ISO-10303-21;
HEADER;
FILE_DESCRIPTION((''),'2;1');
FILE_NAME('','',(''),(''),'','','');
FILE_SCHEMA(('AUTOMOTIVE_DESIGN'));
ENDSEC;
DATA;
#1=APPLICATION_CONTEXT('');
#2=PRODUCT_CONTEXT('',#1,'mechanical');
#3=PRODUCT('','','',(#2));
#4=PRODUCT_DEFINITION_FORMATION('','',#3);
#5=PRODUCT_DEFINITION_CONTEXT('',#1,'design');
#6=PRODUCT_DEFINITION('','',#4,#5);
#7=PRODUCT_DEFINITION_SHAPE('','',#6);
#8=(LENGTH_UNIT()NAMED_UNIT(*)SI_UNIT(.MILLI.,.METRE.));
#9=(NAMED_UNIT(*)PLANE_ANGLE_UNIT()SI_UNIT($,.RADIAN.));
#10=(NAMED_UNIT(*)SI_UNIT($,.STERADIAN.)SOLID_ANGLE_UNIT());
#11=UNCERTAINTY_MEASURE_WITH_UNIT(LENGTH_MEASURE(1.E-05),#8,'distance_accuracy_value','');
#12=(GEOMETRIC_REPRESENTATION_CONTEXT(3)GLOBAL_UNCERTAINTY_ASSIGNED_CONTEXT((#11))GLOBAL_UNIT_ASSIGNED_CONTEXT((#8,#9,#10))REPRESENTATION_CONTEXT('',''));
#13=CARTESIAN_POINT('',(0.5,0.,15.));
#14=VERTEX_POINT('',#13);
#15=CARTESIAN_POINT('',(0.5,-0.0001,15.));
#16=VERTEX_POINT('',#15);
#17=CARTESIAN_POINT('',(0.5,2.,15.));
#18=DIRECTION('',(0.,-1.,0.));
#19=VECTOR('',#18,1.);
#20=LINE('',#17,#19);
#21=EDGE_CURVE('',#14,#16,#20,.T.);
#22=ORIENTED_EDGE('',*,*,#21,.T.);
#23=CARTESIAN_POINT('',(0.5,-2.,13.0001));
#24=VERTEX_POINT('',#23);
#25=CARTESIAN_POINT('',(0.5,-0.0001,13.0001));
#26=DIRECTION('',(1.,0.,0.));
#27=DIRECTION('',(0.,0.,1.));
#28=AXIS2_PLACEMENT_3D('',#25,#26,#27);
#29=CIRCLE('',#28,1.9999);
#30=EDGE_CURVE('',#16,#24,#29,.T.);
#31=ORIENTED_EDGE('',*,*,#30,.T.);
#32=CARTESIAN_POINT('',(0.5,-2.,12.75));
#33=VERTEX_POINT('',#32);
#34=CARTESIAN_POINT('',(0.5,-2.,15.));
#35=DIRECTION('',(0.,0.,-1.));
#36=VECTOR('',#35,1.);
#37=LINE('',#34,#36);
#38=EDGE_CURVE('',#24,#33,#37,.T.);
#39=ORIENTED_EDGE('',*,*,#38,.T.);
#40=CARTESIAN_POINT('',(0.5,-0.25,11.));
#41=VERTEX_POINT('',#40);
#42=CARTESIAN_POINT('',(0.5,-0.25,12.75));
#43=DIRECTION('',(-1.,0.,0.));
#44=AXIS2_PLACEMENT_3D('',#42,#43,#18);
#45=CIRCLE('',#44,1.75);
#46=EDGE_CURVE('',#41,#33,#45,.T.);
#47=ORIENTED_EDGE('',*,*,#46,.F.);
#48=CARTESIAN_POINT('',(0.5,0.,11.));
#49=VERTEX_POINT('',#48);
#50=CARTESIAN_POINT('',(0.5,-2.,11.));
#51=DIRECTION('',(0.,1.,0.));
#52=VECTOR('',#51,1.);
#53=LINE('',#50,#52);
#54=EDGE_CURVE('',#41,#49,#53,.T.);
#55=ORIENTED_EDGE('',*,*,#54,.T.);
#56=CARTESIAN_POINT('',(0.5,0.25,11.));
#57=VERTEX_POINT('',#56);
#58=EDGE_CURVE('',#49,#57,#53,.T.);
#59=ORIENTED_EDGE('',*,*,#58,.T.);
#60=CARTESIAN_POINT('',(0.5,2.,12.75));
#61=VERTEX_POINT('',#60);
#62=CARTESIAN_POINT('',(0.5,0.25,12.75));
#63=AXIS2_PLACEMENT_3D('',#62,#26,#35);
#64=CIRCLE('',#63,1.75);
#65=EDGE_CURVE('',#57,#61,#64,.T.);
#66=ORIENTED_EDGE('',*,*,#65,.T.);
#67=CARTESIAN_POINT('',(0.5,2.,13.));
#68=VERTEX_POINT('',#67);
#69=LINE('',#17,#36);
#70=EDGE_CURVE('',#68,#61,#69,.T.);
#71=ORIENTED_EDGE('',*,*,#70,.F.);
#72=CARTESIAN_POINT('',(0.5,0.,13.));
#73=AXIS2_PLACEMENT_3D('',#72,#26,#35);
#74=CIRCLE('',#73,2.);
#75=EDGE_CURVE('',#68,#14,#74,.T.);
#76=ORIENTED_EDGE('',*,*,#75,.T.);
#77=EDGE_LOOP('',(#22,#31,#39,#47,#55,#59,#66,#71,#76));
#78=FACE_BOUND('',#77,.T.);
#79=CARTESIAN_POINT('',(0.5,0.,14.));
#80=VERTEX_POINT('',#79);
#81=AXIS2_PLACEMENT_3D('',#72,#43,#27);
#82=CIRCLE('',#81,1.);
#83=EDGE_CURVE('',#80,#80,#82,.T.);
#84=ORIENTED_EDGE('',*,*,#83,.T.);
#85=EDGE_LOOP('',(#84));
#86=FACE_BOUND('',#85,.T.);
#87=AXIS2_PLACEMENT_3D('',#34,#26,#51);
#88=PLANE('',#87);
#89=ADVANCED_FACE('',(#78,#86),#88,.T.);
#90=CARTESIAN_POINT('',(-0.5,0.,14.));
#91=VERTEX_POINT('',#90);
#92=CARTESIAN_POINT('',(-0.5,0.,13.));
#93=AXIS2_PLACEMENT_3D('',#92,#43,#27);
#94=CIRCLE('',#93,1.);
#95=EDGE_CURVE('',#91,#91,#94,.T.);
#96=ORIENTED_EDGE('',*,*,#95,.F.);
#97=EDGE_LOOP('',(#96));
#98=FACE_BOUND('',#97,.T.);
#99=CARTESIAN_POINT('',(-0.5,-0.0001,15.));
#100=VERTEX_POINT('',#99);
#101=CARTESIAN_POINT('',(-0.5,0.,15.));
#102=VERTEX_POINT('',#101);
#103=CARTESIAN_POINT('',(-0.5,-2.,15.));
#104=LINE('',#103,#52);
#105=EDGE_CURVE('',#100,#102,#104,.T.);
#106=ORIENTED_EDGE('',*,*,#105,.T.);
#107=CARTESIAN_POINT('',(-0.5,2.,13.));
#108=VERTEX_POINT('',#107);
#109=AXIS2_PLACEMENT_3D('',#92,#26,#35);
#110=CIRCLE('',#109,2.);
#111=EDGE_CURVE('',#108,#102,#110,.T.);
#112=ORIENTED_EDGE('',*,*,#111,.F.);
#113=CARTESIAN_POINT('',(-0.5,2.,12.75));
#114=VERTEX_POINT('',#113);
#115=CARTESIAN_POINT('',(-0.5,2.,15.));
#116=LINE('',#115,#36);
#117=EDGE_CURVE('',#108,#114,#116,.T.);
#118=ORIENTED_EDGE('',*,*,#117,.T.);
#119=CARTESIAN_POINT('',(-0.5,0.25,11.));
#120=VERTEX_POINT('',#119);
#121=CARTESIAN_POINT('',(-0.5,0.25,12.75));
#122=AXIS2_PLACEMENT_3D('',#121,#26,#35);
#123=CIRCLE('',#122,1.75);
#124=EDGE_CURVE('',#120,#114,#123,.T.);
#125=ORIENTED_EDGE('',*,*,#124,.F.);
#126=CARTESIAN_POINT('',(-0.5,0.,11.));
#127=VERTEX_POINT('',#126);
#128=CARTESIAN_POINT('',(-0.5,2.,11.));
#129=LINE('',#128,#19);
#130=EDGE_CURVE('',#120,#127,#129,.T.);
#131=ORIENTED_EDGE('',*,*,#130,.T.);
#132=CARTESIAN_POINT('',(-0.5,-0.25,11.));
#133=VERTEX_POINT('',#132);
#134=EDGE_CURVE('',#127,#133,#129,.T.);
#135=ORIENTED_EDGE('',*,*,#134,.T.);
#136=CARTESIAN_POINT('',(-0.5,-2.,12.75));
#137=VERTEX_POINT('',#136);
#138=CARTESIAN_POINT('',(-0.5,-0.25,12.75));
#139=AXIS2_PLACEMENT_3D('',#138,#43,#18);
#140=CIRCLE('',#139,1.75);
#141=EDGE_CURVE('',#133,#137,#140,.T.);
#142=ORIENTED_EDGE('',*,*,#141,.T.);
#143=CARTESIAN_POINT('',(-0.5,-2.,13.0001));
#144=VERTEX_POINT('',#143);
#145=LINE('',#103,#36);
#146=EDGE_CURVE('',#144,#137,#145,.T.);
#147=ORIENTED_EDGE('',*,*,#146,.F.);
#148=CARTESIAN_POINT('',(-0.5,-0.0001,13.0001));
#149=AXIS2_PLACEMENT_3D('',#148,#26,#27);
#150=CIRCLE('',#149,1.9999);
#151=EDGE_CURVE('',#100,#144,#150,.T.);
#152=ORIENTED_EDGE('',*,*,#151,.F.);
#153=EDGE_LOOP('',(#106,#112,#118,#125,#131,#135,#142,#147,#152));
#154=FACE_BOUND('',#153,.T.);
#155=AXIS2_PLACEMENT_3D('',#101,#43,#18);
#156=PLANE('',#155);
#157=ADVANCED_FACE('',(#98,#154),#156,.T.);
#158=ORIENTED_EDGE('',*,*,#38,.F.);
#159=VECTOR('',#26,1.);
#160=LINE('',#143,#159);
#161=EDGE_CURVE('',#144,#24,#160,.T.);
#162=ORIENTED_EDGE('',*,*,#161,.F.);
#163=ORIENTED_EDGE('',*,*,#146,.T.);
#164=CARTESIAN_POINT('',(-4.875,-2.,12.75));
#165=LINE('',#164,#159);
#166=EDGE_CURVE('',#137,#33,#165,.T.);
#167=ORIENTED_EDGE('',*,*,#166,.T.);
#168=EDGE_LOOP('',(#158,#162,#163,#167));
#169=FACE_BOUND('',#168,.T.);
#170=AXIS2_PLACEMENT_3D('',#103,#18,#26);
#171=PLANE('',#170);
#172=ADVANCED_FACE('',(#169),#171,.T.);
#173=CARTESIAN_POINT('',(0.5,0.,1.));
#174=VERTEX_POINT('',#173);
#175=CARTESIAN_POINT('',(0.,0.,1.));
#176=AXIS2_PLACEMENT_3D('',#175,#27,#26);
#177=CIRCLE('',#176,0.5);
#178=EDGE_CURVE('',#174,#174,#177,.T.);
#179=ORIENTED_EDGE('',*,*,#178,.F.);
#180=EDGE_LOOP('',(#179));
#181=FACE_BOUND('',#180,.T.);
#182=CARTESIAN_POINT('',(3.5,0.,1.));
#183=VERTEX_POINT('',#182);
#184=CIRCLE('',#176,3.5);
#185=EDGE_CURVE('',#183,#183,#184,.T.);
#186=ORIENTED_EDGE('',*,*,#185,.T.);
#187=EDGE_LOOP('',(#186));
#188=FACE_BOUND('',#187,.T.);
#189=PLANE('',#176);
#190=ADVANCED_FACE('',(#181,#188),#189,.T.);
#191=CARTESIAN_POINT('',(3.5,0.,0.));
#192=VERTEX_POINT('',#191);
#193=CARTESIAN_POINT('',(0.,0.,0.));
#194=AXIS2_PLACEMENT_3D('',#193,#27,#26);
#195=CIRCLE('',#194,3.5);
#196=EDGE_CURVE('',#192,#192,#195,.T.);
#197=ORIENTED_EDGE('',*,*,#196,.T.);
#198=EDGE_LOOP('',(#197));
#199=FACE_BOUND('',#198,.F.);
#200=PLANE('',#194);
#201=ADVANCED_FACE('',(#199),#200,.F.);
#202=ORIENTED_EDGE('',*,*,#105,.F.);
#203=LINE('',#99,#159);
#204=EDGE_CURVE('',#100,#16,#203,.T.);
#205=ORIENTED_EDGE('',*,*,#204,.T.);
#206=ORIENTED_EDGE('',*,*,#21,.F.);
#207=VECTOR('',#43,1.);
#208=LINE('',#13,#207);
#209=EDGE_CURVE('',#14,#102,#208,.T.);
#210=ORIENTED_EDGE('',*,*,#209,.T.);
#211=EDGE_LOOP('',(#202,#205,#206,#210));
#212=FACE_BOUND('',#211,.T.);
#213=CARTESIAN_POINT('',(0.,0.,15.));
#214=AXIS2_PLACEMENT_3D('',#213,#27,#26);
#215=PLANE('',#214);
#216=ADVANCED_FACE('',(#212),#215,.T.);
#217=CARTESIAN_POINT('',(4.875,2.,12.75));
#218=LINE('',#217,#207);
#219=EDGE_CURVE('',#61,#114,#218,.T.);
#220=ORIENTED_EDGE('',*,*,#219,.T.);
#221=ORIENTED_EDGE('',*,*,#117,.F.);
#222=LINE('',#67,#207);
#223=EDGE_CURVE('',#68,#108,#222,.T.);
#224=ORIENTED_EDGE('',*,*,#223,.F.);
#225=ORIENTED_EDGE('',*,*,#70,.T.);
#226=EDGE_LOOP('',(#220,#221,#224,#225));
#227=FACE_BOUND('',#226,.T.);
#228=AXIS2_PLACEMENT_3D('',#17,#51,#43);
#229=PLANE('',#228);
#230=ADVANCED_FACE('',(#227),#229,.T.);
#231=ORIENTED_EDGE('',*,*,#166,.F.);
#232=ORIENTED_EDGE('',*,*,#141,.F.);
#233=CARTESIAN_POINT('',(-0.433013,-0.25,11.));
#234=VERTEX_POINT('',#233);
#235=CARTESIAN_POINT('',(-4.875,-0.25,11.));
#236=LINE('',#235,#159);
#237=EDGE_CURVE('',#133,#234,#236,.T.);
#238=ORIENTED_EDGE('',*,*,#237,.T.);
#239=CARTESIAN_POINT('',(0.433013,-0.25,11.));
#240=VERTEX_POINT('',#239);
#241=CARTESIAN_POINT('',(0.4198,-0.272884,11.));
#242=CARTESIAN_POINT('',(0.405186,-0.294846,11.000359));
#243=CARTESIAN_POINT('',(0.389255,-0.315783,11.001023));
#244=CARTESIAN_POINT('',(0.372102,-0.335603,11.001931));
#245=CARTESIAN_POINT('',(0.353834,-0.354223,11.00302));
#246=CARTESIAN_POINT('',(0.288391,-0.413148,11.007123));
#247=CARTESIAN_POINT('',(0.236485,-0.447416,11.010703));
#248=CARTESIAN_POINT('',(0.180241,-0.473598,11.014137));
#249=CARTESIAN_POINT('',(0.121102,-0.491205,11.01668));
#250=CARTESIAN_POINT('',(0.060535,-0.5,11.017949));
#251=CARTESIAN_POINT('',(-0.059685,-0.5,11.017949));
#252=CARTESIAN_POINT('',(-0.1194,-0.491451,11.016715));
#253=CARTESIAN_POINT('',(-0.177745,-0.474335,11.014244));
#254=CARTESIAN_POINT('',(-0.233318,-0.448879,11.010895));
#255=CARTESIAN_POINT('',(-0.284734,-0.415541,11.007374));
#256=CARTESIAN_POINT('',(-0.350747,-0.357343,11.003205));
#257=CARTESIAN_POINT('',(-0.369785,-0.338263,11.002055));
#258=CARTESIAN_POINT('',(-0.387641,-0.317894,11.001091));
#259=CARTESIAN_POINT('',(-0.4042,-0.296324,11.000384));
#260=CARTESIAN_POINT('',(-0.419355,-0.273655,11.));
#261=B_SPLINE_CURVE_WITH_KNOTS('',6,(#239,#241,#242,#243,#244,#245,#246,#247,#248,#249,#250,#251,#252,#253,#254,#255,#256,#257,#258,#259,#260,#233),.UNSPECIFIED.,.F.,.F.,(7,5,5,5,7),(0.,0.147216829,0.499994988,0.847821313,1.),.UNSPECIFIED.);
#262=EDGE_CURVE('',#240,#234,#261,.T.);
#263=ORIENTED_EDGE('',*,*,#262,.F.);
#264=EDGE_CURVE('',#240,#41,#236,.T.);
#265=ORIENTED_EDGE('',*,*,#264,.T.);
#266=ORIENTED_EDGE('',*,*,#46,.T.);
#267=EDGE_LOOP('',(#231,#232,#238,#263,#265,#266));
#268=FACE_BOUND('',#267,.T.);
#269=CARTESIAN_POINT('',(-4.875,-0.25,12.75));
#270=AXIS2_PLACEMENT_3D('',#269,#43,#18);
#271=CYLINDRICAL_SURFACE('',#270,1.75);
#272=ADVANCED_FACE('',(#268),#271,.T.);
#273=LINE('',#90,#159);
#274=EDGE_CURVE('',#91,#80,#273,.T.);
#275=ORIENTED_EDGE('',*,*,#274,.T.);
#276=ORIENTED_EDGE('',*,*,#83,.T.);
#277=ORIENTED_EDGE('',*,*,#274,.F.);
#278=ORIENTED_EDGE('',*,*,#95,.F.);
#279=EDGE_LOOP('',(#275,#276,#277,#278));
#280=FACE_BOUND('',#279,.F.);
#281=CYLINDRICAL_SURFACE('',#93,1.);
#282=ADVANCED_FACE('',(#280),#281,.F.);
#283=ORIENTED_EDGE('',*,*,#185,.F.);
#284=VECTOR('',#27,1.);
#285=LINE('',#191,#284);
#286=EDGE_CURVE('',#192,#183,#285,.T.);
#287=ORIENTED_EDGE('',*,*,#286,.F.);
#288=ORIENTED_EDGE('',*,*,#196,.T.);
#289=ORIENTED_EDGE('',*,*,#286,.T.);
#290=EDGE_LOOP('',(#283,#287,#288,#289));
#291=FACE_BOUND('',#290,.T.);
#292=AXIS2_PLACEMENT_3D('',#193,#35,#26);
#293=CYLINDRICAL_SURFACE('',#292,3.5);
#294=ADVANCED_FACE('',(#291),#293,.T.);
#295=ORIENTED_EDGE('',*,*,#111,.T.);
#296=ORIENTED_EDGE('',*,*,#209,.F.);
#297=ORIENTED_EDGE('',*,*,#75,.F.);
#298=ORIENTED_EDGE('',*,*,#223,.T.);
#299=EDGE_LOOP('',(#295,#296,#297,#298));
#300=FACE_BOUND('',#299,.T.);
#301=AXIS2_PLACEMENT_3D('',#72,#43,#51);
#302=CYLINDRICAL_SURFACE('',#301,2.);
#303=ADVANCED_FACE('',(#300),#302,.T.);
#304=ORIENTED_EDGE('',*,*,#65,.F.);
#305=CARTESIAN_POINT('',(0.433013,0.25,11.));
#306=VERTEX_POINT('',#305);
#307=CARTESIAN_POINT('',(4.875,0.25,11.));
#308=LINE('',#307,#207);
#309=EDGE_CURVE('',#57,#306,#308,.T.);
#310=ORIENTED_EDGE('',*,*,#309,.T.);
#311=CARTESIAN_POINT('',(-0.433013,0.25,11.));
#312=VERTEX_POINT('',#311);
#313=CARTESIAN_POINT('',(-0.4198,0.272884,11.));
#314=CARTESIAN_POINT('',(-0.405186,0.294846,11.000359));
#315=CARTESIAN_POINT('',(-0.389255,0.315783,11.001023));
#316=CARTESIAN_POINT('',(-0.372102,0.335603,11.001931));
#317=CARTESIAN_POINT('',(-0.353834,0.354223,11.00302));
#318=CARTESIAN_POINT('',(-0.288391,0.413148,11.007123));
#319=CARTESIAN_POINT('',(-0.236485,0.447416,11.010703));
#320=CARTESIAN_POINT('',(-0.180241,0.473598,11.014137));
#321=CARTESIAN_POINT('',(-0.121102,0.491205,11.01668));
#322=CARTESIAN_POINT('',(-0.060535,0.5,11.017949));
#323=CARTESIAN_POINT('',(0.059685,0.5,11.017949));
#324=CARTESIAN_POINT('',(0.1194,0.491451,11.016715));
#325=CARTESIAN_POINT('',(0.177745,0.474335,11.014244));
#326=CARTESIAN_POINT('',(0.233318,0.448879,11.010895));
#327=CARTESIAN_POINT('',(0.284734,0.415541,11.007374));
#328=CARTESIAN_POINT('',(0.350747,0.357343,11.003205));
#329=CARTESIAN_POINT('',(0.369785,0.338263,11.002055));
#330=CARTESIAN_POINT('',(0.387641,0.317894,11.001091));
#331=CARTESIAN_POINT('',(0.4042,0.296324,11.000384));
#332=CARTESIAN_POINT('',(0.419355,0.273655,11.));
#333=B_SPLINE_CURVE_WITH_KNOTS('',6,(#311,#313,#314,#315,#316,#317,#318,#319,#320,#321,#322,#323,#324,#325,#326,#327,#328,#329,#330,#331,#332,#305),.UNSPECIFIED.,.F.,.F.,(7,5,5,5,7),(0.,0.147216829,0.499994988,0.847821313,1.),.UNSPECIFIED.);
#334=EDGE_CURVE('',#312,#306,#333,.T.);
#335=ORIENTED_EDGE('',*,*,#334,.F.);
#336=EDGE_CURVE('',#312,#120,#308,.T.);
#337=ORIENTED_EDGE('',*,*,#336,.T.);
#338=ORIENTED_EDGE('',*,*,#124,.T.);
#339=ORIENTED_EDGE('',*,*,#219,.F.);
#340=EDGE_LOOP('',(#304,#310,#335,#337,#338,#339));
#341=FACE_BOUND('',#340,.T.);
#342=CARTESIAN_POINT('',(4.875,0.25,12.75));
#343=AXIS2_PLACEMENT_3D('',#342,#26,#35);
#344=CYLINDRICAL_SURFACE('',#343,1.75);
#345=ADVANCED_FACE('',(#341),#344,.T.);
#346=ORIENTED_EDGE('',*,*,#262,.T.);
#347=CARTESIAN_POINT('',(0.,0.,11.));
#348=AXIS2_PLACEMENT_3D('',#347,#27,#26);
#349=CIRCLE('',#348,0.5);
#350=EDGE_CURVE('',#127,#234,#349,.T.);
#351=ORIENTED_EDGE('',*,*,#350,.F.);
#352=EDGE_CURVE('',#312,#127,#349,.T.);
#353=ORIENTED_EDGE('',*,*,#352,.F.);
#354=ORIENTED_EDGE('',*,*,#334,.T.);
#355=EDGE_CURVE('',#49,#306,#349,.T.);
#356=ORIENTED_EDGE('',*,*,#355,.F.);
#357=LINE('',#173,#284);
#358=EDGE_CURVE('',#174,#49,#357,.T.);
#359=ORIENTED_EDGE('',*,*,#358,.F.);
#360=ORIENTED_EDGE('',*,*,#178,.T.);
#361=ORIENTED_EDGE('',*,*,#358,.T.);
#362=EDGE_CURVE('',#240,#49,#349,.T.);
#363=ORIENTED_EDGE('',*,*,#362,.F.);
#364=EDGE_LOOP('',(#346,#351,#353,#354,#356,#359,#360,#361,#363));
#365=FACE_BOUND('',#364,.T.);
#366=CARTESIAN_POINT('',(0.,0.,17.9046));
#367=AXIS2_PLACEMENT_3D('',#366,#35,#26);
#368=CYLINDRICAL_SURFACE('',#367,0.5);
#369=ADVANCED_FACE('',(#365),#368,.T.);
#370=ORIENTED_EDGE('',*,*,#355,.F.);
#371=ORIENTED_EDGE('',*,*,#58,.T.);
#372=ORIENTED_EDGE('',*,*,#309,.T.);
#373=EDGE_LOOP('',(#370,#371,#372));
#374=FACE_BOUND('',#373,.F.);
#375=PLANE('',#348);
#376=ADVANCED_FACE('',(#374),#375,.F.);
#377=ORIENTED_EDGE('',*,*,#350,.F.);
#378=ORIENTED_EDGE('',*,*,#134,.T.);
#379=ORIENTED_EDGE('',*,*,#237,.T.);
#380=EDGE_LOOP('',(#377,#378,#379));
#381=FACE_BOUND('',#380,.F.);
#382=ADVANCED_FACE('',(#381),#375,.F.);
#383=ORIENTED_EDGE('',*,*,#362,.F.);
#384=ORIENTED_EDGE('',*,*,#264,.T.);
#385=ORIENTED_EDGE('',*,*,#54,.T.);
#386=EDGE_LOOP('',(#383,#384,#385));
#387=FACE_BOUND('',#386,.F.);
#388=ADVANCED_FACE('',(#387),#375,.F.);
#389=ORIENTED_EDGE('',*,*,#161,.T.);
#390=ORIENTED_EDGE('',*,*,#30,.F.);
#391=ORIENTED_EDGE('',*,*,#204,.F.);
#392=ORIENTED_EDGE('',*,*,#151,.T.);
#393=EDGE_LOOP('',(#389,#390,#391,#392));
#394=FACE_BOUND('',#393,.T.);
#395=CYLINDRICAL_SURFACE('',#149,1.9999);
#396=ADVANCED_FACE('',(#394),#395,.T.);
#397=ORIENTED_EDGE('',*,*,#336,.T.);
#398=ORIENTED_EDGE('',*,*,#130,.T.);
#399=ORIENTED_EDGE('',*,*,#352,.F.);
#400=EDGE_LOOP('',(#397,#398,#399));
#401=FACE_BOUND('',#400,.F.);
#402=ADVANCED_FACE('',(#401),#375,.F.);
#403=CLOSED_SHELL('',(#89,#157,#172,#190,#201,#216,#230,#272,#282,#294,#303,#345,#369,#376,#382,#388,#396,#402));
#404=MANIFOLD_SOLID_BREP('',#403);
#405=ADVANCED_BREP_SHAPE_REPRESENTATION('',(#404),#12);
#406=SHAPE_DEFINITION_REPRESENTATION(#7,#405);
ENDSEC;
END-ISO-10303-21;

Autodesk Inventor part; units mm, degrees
ref_plane "YZ Plane" through (0, 0, 0) normal (1, 0, 0) x (0, 1, 0)
ref_plane "XZ Plane" through (0, 0, 0) normal (0, 1, 0) x (-1, 0, 0)
ref_plane "XY Plane" through (0, 0, 0) normal (0, 0, 1) x (1, 0, 0)
sketch "Skizze1" plane through (0, 0, 0) normal (0, 0, 1) x (1, 0, 0)
  circle A0 centre (0, 0) radius 3.5
  dimension "d0" = 7
extrude "Extrusion1" add sketch "Skizze1" along normal blind 1
sketch "Skizze2" plane through (0, 0, 1) normal (0, 0, 1) x (1, 0, 0)
  circle A0 centre (0, 0) radius 0.5
  dimension "d3" = 1
extrude "Extrusion2" add sketch "Skizze2" along normal blind 14
sketch "Skizze4" plane through (0, 0, 15) normal (0, 0, 1) x (1, 0, 0)
  line L0 (-0.5, -2) -> (0.5, -2)
  line L1 (0.5, -2) -> (0.5, 2)
  line L2 (0.5, 2) -> (-0.5, 2)
  line L3 (-0.5, 2) -> (-0.5, -2)
  circle A0 centre (0, 0) radius 0.5 projected
  dimension "d25" = 1
  dimension "d26" = 4
  dimension "d27" = 2
extrude "Extrusion4" add sketch "Skizze4" against normal blind 4 contours L3 A0 L1 L0 | L3 L2 L1 A0
sketch "Skizze6" plane through (-0.5, -2, 15) normal (-1, 0, 0) x (0, 0, 1)
  circle A0 centre (-2, 2) radius 1
  line L0 (0, 4) -> (-4, 4) projected
  line L1 (0, 4) -> (0, 0) projected
  point P0 (-15, 2)
  dimension "d31" = 2
  dimension "d32" = 2
  dimension "d33" = 2
extrude "Extrusion5" cut sketch "Skizze6" against normal blind 1
sketch "Skizze10" plane through (-0.5, -2, 15) normal (-1, 0, 0) x (0, 0, 1)
  point P0 (-15, 2)
fillet "Rundung9" radius 2 1 edges at (0, 2, 15)
fillet "Rundung10" radius 2 1 edges at (0, -2, 15)
fillet "Rundung11" radius 1.75 1 edges at (0, -2, 11)
fillet "Rundung12" radius 1.75 1 edges at (0, 2, 11)
properties part number "Pneumatickolben_Kolbenkreis"
